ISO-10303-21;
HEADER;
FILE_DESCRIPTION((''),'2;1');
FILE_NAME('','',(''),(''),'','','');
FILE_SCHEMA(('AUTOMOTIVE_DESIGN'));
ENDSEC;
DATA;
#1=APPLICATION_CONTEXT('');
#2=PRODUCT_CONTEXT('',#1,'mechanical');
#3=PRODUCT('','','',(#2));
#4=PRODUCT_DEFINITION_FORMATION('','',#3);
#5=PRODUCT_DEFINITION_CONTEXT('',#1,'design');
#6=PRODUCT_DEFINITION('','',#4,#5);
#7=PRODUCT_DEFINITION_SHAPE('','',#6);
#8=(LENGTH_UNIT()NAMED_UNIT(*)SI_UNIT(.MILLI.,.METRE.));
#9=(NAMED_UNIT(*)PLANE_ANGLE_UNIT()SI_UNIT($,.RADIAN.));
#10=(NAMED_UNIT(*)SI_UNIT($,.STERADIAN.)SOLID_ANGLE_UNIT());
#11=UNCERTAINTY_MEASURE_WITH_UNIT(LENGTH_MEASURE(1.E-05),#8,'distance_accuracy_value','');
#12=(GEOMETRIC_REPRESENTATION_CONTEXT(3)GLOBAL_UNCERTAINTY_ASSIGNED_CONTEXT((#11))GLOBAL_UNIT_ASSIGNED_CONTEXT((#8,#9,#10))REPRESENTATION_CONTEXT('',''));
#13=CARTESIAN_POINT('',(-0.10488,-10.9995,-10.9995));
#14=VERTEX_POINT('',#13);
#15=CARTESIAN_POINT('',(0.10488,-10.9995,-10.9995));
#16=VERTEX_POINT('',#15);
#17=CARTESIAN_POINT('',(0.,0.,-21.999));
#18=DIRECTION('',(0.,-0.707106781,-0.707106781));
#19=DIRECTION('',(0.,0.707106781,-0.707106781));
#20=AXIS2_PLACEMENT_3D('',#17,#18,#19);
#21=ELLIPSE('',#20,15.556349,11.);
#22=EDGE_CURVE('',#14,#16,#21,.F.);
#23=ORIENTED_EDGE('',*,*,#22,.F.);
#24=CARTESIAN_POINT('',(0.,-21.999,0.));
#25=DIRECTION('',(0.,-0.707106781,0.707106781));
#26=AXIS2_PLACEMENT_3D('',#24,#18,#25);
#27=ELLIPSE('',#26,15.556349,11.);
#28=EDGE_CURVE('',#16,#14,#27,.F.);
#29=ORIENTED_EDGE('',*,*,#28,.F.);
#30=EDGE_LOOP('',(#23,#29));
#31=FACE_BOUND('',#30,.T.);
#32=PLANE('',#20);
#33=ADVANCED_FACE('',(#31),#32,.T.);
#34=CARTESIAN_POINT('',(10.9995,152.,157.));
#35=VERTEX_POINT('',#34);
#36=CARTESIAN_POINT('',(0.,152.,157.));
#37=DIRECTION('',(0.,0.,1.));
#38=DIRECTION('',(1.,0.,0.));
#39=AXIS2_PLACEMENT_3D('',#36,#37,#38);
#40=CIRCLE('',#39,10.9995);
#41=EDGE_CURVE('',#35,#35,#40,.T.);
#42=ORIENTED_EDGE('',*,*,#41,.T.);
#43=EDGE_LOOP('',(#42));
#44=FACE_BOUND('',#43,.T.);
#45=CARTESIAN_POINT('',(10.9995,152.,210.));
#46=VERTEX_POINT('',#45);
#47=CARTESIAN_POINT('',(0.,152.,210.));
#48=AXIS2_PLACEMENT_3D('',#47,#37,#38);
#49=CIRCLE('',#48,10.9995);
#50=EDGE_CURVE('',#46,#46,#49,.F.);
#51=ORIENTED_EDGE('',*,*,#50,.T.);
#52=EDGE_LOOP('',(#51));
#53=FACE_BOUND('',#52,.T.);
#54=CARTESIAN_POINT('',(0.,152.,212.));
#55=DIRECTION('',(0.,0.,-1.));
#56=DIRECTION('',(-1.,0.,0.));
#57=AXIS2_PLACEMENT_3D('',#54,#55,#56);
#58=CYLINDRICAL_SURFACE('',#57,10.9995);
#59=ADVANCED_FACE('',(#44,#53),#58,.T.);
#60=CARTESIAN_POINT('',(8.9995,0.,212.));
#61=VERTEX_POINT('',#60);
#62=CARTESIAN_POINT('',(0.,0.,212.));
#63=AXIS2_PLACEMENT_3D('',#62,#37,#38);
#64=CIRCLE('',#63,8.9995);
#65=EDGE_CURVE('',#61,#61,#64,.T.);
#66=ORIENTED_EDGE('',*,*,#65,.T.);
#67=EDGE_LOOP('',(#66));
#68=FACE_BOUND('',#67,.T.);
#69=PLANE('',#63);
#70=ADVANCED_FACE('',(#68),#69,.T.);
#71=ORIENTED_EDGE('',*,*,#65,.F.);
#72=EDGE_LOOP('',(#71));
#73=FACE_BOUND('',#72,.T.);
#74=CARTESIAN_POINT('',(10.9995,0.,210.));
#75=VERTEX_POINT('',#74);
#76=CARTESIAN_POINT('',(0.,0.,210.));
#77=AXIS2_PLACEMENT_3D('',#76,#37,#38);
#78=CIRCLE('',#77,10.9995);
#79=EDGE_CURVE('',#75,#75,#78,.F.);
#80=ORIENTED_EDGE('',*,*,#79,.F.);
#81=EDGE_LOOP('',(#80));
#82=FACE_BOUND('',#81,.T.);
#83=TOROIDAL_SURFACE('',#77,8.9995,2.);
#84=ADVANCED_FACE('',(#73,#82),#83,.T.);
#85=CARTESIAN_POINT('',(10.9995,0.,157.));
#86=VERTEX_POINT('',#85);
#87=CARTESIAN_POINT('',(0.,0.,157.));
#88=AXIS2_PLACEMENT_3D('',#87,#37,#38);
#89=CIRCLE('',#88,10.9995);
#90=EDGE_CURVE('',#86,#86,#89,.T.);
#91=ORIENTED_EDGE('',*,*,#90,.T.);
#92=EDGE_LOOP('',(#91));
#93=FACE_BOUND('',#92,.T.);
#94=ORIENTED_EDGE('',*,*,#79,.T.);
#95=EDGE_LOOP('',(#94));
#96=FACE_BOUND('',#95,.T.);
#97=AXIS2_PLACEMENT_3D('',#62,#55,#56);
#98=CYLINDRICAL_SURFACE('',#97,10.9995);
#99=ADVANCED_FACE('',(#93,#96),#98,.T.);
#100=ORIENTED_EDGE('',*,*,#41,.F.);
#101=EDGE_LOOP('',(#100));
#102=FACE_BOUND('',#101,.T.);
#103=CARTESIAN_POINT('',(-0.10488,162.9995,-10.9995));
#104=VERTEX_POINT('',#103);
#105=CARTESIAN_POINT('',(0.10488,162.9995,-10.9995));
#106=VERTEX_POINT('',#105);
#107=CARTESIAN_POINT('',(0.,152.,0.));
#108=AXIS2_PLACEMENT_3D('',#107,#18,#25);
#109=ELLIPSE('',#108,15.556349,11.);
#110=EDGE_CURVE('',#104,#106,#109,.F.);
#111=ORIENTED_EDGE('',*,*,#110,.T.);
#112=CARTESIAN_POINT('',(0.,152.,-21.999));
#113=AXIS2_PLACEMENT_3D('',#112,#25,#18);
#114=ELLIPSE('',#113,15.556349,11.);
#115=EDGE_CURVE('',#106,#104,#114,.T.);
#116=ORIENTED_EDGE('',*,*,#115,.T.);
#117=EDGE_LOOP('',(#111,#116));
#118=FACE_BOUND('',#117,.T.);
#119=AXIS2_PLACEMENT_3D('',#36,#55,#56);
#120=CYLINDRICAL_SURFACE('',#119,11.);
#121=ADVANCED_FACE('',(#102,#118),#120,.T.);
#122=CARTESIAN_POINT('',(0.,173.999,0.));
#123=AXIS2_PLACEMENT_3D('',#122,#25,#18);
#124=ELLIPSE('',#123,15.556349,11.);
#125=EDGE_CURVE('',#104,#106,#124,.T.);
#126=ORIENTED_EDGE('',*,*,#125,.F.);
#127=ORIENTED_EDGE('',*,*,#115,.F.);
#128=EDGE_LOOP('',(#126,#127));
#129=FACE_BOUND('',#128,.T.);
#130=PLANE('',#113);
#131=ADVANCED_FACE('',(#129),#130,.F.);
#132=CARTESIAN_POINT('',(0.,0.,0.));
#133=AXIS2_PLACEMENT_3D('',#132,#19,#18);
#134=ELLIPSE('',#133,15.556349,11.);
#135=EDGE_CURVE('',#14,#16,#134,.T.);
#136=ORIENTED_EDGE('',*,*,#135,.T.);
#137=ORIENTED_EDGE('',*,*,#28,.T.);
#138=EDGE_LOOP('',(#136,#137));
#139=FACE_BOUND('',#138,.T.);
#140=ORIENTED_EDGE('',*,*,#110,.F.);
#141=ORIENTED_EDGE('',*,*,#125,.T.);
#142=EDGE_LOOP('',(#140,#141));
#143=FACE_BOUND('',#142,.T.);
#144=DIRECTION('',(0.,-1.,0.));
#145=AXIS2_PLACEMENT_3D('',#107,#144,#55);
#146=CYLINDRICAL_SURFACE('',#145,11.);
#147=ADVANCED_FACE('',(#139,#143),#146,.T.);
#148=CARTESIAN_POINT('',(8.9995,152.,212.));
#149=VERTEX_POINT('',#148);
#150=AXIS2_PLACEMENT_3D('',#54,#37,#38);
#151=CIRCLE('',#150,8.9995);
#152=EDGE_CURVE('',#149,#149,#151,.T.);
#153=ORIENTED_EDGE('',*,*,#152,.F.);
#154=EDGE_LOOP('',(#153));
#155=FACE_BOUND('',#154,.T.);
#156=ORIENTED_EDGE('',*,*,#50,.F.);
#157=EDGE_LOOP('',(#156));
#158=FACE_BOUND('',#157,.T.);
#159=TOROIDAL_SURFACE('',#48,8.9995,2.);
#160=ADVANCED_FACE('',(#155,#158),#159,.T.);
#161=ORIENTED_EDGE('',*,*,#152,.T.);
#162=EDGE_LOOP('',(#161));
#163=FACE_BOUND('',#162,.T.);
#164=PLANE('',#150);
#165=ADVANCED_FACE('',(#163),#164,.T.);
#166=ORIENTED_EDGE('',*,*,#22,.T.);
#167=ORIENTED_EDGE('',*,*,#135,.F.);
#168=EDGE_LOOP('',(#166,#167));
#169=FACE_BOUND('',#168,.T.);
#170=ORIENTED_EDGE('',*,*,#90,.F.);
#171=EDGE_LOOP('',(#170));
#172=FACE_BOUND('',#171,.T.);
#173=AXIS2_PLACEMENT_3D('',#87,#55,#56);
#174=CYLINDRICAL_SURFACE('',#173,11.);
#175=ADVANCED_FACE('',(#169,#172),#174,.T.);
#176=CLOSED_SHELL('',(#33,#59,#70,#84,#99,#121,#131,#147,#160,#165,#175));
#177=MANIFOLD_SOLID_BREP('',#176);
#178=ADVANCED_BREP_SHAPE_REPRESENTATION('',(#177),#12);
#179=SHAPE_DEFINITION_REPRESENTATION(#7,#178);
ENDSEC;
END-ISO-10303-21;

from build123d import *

# Parameters (mm, degrees)
SKETCH_1_R             = 11
EXTRUDE_1_DEPTH        = 157
SKETCH_2_R             = 11
EXTRUDE_2_DEPTH        = 152
PATTERN_LINEAR_1_COUNT = 2
PATTERN_LINEAR_1_PITCH = 152
CHAMFER_3_SIZE         = 21.999
SKETCH_3_R             = 10.9995
EXTRUDE_3_DEPTH        = 55
FILLET_1_R             = 2


with BuildPart() as part:
    # 草图1 → 拉伸1 (new body)
    with BuildSketch(Plane.XY):
        Circle(SKETCH_1_R)
    extrude_1 = extrude(amount=EXTRUDE_1_DEPTH)

    # 草图2 → 拉伸2 (add)
    with BuildSketch(Plane(origin=(0, 0, 0), x_dir=(1, 0, 0), z_dir=(0, 1, 0))):
        with Locations(Location((0, 0, 0), (0, 0, 180))):
            Circle(SKETCH_2_R)
    extrude(amount=EXTRUDE_2_DEPTH)

    # 阵列(线性)1: 拉伸1 ×2
    with Locations(*[(0, i * PATTERN_LINEAR_1_PITCH, 0) for i in range(1, PATTERN_LINEAR_1_COUNT)]):
        add(extrude_1)

    # 倒角3
    # the kernel refuses this chamfer: 21.999 mm, written as the material it adds along each edge
    with BuildSketch(Plane(origin=(67.574454052, 0, 0), x_dir=(0, -0.9996219169112966, 0.027495876610586372), z_dir=(-1, 0, 0))) as chamfer_3_piece_1_section:
        Polygon((CHAMFER_3_SIZE * 0.999621916911, -CHAMFER_3_SIZE * 0.0274958766106), (-CHAMFER_3_SIZE * 0.0274958766106, -CHAMFER_3_SIZE * 0.999621916911), (0, 0), align=None)
    chamfer_3_piece_1 = extrude(amount=135.148908105, mode=Mode.PRIVATE)
    chamfer_3_piece_1 = chamfer_3_piece_1 & Plane(origin=(0, 0, -4.859651136), x_dir=(1, 0, 0), z_dir=(0, 0, -1)) * Cylinder(11, 359, mode=Mode.PRIVATE)
    chamfer_3_piece_1 = chamfer_3_piece_1 & Plane(origin=(0, -4.859651136, 0), x_dir=(-1, 0, 0), z_dir=(0, -1, 0)) * Cylinder(11, 359, mode=Mode.PRIVATE)
    add(chamfer_3_piece_1)
    with BuildSketch(Plane(origin=(-67.574454052, 152, 0), x_dir=(0, -0.027495876610586986, -0.9996219169112966), z_dir=(1, 0, 0))) as chamfer_3_piece_2_section:
        Polygon((CHAMFER_3_SIZE * 0.999621916911, CHAMFER_3_SIZE * 0.0274958766106), (-CHAMFER_3_SIZE * 0.0274958766106, CHAMFER_3_SIZE * 0.999621916911), (0, 0), align=None)
    chamfer_3_piece_2 = extrude(amount=135.148908105, mode=Mode.PRIVATE)
    chamfer_3_piece_2 = chamfer_3_piece_2 & Plane(origin=(0, 156.859651136, 0), x_dir=(-1, 0, 0), z_dir=(0, -1, 0)) * Cylinder(11, 359, mode=Mode.PRIVATE)
    chamfer_3_piece_2 = chamfer_3_piece_2 & Plane(origin=(0, 152, -4.859651136), x_dir=(1, 0, 0), z_dir=(0, 0, -1)) * Cylinder(11, 359, mode=Mode.PRIVATE)
    add(chamfer_3_piece_2)

    # 草图3 → 拉伸3 (add)
    with BuildSketch(Plane.XY.offset(157)):
        with Locations((0, 152)):
            Circle(SKETCH_3_R)
        Circle(SKETCH_3_R)
    extrude(amount=EXTRUDE_3_DEPTH)

    # 圆角1
    fillet_1_edges = [part.edges().sort_by_distance(p)[0] for p in [
        (-10.9995, 152, 212),
        (-10.9995, 0, 212),
    ]]
    fillet(fillet_1_edges, radius=FILLET_1_R)


solid = part.part
